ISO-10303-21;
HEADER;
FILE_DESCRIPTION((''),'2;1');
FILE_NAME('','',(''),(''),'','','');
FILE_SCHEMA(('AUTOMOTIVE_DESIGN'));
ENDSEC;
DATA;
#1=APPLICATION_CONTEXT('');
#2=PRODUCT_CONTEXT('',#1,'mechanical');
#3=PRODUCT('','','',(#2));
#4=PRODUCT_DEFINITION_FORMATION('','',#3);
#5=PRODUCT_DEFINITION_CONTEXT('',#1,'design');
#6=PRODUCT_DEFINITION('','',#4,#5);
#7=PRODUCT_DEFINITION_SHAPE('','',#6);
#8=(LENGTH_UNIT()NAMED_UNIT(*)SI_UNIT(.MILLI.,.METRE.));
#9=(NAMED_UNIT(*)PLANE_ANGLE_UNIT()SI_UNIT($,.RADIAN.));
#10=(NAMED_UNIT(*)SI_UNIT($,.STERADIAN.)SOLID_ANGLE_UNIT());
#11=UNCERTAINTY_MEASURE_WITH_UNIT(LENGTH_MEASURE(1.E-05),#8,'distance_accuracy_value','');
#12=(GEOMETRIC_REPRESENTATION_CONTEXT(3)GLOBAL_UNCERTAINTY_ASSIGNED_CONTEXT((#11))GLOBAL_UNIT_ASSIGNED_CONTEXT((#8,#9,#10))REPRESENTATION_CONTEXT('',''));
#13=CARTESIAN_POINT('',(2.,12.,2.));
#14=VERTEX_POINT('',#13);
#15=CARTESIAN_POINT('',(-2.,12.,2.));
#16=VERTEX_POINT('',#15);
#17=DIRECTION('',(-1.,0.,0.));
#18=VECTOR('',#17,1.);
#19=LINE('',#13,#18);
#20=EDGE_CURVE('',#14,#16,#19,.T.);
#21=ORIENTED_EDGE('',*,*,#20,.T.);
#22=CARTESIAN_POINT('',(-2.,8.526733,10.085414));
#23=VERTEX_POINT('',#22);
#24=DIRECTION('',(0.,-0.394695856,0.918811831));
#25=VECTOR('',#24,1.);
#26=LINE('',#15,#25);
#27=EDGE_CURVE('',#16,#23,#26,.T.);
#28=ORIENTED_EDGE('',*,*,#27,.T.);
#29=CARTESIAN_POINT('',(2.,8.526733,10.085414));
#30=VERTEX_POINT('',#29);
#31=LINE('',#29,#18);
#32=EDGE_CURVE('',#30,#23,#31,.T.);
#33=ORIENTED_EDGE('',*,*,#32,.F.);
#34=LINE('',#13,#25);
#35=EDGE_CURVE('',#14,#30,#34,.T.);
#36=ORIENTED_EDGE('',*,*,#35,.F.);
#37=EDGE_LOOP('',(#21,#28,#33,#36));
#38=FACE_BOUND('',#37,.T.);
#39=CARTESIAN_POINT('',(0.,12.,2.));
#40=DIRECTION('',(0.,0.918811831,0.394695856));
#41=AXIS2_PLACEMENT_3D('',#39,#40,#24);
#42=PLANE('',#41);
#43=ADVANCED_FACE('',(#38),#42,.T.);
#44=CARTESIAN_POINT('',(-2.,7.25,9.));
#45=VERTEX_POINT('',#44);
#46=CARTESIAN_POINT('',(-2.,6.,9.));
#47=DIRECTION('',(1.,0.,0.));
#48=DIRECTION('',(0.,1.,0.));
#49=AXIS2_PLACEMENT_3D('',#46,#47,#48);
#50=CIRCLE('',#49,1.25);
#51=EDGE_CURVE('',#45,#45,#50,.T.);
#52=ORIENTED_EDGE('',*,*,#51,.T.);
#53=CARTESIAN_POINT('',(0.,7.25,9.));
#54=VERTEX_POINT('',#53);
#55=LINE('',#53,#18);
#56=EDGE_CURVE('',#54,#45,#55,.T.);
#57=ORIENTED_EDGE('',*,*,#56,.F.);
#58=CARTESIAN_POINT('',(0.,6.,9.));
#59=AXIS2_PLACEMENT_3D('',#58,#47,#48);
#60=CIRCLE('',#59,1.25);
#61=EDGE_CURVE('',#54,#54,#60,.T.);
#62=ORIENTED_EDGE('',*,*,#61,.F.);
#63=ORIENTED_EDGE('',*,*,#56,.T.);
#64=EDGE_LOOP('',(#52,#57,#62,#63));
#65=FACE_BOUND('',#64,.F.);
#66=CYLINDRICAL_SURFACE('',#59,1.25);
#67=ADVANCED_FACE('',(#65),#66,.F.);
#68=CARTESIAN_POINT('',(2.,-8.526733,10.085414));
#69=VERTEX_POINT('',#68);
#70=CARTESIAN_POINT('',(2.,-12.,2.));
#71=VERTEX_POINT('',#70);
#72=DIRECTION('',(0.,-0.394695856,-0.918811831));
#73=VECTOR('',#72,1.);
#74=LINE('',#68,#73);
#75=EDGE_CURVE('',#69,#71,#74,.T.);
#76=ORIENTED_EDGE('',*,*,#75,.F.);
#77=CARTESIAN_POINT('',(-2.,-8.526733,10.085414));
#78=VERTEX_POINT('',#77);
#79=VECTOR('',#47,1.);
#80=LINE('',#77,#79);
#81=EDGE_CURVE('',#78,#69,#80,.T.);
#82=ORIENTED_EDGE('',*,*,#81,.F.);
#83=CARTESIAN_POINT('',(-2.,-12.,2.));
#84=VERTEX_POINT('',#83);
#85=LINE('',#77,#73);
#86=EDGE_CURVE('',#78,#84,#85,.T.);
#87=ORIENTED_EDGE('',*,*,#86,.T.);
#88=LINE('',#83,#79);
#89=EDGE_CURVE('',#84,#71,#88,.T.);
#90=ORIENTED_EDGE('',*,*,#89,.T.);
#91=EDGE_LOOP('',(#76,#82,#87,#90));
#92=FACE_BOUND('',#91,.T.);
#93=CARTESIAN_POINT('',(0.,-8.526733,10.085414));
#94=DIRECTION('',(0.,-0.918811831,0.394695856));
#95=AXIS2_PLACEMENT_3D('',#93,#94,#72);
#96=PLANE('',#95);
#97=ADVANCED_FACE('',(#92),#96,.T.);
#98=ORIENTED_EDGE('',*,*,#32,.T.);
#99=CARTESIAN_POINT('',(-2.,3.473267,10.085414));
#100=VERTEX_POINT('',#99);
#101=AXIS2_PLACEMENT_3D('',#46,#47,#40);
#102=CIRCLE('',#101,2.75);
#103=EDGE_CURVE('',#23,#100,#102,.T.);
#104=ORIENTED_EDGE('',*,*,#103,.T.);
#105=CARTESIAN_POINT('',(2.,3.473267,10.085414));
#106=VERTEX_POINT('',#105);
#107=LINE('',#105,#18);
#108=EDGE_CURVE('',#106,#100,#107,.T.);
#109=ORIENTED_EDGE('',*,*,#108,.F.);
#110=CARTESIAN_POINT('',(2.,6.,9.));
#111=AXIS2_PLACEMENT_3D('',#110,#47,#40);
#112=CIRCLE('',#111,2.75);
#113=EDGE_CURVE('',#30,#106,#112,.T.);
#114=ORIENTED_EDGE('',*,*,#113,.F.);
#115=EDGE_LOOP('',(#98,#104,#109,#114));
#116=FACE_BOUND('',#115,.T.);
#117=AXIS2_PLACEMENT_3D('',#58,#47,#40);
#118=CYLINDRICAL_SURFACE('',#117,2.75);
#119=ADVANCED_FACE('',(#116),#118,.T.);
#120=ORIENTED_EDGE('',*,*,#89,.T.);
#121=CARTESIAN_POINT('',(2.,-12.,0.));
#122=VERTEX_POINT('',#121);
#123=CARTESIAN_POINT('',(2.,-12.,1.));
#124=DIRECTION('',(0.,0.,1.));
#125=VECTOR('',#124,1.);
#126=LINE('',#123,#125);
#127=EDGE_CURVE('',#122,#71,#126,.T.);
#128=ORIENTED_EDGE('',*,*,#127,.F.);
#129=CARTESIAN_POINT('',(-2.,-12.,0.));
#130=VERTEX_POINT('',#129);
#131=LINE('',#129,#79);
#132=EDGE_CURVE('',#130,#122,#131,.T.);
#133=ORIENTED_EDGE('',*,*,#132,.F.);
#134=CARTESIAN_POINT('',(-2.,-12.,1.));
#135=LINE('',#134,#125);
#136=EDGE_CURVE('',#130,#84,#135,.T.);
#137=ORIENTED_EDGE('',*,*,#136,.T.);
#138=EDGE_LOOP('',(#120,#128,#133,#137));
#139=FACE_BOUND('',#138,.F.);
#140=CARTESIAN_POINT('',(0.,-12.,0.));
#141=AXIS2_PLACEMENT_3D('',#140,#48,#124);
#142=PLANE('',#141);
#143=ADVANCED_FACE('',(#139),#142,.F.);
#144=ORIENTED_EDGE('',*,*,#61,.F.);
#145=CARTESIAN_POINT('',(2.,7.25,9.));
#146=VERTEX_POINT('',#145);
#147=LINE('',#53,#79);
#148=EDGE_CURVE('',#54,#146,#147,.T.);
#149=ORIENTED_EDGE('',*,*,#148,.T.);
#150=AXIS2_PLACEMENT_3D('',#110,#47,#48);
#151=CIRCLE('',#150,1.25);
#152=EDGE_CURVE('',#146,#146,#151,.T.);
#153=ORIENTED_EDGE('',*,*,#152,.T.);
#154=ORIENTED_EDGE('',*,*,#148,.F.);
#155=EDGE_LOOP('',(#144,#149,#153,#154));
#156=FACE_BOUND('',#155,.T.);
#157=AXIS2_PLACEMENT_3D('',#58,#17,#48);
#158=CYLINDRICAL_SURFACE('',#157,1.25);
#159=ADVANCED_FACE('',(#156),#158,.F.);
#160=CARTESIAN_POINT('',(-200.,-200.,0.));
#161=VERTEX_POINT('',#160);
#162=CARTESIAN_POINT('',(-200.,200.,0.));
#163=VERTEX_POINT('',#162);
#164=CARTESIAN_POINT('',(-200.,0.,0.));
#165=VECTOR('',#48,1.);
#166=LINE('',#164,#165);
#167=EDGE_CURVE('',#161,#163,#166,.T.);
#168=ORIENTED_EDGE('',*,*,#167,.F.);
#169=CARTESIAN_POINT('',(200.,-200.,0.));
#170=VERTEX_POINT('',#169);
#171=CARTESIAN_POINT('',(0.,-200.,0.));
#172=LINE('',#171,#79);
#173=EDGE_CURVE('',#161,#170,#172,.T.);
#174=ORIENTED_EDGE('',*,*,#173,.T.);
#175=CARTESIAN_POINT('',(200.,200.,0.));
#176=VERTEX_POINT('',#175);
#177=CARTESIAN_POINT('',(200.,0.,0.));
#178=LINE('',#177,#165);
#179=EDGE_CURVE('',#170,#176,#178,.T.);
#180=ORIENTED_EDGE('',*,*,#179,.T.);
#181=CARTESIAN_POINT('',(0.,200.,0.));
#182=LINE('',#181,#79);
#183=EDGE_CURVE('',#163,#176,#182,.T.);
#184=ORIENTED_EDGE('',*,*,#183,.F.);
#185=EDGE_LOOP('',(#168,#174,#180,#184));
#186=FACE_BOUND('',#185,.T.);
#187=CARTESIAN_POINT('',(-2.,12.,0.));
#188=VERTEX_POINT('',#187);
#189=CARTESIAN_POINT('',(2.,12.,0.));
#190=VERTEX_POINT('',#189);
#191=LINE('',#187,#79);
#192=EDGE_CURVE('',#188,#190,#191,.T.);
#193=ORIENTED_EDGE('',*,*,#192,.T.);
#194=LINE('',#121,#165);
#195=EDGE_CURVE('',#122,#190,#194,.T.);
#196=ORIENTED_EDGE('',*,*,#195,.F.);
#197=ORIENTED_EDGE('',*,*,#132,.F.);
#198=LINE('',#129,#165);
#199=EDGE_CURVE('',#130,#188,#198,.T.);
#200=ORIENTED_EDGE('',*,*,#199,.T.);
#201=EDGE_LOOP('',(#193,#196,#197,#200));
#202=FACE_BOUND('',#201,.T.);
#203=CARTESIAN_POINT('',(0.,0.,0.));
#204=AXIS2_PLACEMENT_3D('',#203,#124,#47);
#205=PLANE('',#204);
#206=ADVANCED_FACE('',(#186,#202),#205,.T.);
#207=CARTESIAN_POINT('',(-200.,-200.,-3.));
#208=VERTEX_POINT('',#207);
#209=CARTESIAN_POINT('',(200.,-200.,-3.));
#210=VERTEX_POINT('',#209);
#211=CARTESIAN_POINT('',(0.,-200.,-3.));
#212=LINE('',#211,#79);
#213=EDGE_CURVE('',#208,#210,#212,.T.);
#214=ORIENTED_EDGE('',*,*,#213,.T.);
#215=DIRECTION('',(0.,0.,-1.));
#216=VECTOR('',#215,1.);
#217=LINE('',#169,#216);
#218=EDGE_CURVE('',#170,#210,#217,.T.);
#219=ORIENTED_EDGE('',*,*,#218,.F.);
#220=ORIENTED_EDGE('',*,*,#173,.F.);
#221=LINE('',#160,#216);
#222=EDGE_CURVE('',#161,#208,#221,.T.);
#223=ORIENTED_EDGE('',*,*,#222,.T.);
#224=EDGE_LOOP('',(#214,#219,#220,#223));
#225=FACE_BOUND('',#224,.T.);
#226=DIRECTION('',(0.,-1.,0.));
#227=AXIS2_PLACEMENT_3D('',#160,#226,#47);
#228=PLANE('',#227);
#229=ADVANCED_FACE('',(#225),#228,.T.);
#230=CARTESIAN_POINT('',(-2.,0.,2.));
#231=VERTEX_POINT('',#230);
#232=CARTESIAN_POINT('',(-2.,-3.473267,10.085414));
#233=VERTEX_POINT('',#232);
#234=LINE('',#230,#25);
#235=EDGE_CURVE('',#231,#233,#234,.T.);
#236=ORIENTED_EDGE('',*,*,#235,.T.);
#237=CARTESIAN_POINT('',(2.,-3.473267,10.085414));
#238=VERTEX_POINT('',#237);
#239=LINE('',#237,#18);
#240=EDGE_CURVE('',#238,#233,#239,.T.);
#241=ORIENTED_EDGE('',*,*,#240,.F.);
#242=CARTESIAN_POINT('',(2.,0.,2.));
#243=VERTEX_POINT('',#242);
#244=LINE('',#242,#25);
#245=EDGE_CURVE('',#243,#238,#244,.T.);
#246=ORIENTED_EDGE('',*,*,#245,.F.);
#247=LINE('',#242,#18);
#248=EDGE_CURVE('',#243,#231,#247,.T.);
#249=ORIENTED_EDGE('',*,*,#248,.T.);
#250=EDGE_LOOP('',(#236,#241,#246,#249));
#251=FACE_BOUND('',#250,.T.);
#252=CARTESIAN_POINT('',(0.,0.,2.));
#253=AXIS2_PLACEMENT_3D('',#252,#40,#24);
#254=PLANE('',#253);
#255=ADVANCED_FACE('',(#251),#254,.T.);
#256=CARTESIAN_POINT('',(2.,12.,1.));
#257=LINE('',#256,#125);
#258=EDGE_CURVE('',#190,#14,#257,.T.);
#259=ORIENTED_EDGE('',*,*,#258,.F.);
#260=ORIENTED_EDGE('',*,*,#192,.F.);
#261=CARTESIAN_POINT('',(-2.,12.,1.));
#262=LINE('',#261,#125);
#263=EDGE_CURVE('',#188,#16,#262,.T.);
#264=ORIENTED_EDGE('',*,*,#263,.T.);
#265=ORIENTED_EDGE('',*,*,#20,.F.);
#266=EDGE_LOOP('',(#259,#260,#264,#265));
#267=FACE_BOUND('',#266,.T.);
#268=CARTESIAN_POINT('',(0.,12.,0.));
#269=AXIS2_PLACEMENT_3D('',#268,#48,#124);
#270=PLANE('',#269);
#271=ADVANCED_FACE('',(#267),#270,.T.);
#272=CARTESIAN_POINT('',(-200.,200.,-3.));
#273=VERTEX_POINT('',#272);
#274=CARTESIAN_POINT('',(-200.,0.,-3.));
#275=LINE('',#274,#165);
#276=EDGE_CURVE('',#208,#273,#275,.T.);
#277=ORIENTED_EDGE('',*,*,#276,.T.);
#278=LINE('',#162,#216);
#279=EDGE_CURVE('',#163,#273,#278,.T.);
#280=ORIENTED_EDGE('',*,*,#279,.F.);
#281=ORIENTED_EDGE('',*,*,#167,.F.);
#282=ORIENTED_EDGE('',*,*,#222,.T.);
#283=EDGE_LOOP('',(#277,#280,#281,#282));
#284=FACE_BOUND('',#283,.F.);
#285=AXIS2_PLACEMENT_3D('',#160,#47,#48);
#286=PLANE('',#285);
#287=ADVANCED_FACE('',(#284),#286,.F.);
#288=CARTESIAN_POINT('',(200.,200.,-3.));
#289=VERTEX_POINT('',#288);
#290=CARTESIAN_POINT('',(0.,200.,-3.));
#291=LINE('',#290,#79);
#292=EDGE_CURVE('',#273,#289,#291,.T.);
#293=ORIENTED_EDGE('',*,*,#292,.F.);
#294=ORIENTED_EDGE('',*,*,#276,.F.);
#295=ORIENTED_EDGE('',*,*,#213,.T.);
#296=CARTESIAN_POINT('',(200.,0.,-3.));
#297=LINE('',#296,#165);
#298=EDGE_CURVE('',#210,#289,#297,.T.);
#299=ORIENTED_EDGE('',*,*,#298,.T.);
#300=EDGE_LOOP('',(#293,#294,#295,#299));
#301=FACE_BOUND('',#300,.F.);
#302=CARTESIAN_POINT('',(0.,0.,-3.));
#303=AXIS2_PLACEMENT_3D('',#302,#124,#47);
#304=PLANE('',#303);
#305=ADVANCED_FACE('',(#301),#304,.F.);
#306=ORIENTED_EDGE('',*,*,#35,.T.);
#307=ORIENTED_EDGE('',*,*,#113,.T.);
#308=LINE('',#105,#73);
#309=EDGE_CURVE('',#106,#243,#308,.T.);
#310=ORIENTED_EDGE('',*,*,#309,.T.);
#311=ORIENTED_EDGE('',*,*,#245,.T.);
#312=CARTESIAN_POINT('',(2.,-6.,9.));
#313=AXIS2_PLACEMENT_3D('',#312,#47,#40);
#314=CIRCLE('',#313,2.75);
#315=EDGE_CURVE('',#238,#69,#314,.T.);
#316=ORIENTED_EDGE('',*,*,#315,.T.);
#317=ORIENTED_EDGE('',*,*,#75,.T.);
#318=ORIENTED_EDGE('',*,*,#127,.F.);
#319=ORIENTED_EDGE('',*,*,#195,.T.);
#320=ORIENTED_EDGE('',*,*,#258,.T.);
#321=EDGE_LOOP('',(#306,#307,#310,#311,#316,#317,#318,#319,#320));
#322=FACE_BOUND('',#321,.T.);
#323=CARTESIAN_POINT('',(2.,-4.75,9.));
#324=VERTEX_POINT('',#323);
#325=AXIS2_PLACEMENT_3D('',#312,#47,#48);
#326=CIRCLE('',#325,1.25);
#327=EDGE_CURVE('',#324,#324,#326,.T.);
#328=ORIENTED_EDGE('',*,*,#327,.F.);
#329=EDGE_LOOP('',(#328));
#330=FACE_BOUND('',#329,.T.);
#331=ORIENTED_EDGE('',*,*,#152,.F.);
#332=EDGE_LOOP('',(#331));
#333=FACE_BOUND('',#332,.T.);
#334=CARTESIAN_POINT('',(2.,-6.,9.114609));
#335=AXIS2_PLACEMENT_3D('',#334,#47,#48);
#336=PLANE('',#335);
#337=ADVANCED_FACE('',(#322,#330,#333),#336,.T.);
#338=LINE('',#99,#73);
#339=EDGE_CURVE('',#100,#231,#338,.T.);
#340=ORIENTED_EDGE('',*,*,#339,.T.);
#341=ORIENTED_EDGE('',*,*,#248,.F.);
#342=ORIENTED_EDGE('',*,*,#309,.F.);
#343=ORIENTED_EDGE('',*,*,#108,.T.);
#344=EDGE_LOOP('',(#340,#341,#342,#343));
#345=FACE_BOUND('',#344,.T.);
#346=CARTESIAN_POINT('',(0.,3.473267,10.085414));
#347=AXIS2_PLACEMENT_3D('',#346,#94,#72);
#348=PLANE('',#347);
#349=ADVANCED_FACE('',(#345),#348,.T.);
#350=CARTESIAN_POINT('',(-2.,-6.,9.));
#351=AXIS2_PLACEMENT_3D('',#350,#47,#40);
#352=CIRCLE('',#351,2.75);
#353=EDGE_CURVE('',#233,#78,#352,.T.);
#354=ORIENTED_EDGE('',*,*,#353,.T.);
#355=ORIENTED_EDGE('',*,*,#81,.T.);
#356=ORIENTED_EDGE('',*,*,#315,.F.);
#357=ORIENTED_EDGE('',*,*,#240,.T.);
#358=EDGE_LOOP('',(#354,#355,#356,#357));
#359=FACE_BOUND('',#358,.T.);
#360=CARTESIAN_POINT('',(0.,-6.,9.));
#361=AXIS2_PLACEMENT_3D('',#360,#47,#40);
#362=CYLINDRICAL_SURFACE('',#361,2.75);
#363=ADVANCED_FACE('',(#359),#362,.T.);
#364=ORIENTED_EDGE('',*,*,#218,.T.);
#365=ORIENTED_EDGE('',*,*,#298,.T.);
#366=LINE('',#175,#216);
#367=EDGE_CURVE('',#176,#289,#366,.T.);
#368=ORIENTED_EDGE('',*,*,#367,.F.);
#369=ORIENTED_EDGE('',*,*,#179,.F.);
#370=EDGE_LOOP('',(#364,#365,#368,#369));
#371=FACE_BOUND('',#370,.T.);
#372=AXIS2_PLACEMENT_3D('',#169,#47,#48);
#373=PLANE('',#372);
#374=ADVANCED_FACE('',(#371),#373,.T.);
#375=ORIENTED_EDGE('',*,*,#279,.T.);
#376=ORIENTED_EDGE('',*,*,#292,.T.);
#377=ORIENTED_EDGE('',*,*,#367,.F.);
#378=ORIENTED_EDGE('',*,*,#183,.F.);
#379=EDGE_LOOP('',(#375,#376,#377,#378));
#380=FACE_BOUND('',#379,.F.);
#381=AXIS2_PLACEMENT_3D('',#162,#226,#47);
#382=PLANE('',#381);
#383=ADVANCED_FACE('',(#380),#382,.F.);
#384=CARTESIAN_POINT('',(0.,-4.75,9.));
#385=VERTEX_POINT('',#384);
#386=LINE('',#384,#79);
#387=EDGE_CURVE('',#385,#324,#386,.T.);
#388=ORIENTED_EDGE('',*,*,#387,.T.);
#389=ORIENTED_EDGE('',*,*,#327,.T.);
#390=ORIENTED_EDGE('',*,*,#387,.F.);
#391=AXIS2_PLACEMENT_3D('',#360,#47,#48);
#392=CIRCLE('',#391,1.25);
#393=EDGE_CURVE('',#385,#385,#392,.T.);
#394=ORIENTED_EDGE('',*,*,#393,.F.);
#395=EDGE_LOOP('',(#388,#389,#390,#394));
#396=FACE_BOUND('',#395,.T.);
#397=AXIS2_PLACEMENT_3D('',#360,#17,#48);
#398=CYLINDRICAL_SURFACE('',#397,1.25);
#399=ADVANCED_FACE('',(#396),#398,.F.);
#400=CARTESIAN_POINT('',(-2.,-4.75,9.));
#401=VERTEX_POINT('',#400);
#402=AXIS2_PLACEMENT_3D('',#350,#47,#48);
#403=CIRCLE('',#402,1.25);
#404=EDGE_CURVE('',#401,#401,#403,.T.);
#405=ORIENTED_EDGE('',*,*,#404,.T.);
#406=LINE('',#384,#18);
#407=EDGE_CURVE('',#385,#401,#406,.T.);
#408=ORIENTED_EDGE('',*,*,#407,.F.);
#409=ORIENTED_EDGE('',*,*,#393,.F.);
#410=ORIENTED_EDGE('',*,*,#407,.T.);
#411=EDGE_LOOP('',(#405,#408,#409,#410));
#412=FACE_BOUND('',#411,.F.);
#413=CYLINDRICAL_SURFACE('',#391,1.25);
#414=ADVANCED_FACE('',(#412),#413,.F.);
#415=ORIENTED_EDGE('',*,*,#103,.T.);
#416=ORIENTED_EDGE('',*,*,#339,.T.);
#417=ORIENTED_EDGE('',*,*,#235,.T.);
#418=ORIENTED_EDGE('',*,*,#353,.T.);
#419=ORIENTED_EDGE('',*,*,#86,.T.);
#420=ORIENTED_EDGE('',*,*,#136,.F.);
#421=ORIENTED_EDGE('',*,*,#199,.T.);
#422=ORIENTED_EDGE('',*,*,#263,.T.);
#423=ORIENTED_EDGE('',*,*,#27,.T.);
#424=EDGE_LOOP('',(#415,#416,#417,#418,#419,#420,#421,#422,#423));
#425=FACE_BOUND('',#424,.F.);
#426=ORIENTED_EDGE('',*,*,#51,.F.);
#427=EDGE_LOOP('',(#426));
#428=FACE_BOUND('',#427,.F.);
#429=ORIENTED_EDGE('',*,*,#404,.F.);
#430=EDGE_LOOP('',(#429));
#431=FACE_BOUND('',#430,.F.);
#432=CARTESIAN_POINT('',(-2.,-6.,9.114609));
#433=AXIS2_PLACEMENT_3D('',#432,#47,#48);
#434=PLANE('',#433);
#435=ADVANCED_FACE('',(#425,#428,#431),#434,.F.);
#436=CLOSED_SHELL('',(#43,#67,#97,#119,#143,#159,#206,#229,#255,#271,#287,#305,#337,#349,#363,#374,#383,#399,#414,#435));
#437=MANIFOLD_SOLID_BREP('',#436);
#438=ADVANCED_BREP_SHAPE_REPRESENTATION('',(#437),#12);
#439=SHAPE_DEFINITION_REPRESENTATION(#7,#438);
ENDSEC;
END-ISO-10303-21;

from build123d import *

# Parameters (mm, degrees)
F0_W     = 400
F0_H     = 400
F1_DEPTH = 3
F2_R     = 1.25
F2_W     = 12
F2_H     = 2
F3_DEPTH = 2
F4_DEPTH = 2


with BuildPart() as f1:
    # F0 (on Top) → F1 (new body)
    with BuildSketch(Plane.XY):
        Rectangle(F0_W, F0_H)
    extrude(amount=-F1_DEPTH)

    # F2 (on Right) → F3 (join)
    with BuildSketch(Plane.YZ):
        with BuildLine():
            ThreePointArc((-3.4732674635, 10.0854136027), (-6, 11.75), (-8.5267325365, 10.0854136027))
            ThreePointArc((-8.5267325365, 10.0854136027), (-6.5540692757, 6.3063951222), (-3.25, 9))
            ThreePointArc((-3.25, 9), (-3.3063951222, 9.5540692757), (-3.4732674635, 10.0854136027))
        make_face()
        with Locations((-6, 9)):
            Circle(F2_R, mode=Mode.SUBTRACT)
        with BuildLine():
            Line((-8.5267325365, 10.0854136027), (-12, 2))
            Line((-12, 2), (0, 2))
            Line((0, 2), (-3.4732674635, 10.0854136027))
            ThreePointArc((-3.4732674635, 10.0854136027), (-3.3063951222, 9.5540692757), (-3.25, 9))
            ThreePointArc((-3.25, 9), (-6.5540692757, 6.3063951222), (-8.5267325365, 10.0854136027))
        make_face()
        with Locations((-6, 1)):
            Rectangle(F2_W, F2_H)
        with Locations((6, 1)):
            Rectangle(F2_W, F2_H)
        with BuildLine():
            Line((3.4732674635, 10.0854136027), (0, 2))
            Line((0, 2), (12, 2))
            Line((12, 2), (8.5267325365, 10.0854136027))
            ThreePointArc((8.5267325365, 10.0854136027), (8.6936048778, 9.5540692757), (8.75, 9))
            ThreePointArc((8.75, 9), (5.4459307243, 6.3063951222), (3.4732674635, 10.0854136027))
        make_face()
        with BuildLine():
            ThreePointArc((8.5267325365, 10.0854136027), (6, 11.75), (3.4732674635, 10.0854136027))
            ThreePointArc((3.4732674635, 10.0854136027), (5.4459307243, 6.3063951222), (8.75, 9))
            ThreePointArc((8.75, 9), (8.6936048778, 9.5540692757), (8.5267325365, 10.0854136027))
        make_face()
        with Locations((6, 9)):
            Circle(F2_R, mode=Mode.SUBTRACT)
    extrude(amount=F3_DEPTH)

    # F4 (add): a face of the model
    f4_faces = [f1.faces().sort_by_distance(p)[0] for p in [
        (0, -6, 11.4827805209),
    ]]
    extrude(f4_faces, amount=F4_DEPTH)


solid = f1.part
